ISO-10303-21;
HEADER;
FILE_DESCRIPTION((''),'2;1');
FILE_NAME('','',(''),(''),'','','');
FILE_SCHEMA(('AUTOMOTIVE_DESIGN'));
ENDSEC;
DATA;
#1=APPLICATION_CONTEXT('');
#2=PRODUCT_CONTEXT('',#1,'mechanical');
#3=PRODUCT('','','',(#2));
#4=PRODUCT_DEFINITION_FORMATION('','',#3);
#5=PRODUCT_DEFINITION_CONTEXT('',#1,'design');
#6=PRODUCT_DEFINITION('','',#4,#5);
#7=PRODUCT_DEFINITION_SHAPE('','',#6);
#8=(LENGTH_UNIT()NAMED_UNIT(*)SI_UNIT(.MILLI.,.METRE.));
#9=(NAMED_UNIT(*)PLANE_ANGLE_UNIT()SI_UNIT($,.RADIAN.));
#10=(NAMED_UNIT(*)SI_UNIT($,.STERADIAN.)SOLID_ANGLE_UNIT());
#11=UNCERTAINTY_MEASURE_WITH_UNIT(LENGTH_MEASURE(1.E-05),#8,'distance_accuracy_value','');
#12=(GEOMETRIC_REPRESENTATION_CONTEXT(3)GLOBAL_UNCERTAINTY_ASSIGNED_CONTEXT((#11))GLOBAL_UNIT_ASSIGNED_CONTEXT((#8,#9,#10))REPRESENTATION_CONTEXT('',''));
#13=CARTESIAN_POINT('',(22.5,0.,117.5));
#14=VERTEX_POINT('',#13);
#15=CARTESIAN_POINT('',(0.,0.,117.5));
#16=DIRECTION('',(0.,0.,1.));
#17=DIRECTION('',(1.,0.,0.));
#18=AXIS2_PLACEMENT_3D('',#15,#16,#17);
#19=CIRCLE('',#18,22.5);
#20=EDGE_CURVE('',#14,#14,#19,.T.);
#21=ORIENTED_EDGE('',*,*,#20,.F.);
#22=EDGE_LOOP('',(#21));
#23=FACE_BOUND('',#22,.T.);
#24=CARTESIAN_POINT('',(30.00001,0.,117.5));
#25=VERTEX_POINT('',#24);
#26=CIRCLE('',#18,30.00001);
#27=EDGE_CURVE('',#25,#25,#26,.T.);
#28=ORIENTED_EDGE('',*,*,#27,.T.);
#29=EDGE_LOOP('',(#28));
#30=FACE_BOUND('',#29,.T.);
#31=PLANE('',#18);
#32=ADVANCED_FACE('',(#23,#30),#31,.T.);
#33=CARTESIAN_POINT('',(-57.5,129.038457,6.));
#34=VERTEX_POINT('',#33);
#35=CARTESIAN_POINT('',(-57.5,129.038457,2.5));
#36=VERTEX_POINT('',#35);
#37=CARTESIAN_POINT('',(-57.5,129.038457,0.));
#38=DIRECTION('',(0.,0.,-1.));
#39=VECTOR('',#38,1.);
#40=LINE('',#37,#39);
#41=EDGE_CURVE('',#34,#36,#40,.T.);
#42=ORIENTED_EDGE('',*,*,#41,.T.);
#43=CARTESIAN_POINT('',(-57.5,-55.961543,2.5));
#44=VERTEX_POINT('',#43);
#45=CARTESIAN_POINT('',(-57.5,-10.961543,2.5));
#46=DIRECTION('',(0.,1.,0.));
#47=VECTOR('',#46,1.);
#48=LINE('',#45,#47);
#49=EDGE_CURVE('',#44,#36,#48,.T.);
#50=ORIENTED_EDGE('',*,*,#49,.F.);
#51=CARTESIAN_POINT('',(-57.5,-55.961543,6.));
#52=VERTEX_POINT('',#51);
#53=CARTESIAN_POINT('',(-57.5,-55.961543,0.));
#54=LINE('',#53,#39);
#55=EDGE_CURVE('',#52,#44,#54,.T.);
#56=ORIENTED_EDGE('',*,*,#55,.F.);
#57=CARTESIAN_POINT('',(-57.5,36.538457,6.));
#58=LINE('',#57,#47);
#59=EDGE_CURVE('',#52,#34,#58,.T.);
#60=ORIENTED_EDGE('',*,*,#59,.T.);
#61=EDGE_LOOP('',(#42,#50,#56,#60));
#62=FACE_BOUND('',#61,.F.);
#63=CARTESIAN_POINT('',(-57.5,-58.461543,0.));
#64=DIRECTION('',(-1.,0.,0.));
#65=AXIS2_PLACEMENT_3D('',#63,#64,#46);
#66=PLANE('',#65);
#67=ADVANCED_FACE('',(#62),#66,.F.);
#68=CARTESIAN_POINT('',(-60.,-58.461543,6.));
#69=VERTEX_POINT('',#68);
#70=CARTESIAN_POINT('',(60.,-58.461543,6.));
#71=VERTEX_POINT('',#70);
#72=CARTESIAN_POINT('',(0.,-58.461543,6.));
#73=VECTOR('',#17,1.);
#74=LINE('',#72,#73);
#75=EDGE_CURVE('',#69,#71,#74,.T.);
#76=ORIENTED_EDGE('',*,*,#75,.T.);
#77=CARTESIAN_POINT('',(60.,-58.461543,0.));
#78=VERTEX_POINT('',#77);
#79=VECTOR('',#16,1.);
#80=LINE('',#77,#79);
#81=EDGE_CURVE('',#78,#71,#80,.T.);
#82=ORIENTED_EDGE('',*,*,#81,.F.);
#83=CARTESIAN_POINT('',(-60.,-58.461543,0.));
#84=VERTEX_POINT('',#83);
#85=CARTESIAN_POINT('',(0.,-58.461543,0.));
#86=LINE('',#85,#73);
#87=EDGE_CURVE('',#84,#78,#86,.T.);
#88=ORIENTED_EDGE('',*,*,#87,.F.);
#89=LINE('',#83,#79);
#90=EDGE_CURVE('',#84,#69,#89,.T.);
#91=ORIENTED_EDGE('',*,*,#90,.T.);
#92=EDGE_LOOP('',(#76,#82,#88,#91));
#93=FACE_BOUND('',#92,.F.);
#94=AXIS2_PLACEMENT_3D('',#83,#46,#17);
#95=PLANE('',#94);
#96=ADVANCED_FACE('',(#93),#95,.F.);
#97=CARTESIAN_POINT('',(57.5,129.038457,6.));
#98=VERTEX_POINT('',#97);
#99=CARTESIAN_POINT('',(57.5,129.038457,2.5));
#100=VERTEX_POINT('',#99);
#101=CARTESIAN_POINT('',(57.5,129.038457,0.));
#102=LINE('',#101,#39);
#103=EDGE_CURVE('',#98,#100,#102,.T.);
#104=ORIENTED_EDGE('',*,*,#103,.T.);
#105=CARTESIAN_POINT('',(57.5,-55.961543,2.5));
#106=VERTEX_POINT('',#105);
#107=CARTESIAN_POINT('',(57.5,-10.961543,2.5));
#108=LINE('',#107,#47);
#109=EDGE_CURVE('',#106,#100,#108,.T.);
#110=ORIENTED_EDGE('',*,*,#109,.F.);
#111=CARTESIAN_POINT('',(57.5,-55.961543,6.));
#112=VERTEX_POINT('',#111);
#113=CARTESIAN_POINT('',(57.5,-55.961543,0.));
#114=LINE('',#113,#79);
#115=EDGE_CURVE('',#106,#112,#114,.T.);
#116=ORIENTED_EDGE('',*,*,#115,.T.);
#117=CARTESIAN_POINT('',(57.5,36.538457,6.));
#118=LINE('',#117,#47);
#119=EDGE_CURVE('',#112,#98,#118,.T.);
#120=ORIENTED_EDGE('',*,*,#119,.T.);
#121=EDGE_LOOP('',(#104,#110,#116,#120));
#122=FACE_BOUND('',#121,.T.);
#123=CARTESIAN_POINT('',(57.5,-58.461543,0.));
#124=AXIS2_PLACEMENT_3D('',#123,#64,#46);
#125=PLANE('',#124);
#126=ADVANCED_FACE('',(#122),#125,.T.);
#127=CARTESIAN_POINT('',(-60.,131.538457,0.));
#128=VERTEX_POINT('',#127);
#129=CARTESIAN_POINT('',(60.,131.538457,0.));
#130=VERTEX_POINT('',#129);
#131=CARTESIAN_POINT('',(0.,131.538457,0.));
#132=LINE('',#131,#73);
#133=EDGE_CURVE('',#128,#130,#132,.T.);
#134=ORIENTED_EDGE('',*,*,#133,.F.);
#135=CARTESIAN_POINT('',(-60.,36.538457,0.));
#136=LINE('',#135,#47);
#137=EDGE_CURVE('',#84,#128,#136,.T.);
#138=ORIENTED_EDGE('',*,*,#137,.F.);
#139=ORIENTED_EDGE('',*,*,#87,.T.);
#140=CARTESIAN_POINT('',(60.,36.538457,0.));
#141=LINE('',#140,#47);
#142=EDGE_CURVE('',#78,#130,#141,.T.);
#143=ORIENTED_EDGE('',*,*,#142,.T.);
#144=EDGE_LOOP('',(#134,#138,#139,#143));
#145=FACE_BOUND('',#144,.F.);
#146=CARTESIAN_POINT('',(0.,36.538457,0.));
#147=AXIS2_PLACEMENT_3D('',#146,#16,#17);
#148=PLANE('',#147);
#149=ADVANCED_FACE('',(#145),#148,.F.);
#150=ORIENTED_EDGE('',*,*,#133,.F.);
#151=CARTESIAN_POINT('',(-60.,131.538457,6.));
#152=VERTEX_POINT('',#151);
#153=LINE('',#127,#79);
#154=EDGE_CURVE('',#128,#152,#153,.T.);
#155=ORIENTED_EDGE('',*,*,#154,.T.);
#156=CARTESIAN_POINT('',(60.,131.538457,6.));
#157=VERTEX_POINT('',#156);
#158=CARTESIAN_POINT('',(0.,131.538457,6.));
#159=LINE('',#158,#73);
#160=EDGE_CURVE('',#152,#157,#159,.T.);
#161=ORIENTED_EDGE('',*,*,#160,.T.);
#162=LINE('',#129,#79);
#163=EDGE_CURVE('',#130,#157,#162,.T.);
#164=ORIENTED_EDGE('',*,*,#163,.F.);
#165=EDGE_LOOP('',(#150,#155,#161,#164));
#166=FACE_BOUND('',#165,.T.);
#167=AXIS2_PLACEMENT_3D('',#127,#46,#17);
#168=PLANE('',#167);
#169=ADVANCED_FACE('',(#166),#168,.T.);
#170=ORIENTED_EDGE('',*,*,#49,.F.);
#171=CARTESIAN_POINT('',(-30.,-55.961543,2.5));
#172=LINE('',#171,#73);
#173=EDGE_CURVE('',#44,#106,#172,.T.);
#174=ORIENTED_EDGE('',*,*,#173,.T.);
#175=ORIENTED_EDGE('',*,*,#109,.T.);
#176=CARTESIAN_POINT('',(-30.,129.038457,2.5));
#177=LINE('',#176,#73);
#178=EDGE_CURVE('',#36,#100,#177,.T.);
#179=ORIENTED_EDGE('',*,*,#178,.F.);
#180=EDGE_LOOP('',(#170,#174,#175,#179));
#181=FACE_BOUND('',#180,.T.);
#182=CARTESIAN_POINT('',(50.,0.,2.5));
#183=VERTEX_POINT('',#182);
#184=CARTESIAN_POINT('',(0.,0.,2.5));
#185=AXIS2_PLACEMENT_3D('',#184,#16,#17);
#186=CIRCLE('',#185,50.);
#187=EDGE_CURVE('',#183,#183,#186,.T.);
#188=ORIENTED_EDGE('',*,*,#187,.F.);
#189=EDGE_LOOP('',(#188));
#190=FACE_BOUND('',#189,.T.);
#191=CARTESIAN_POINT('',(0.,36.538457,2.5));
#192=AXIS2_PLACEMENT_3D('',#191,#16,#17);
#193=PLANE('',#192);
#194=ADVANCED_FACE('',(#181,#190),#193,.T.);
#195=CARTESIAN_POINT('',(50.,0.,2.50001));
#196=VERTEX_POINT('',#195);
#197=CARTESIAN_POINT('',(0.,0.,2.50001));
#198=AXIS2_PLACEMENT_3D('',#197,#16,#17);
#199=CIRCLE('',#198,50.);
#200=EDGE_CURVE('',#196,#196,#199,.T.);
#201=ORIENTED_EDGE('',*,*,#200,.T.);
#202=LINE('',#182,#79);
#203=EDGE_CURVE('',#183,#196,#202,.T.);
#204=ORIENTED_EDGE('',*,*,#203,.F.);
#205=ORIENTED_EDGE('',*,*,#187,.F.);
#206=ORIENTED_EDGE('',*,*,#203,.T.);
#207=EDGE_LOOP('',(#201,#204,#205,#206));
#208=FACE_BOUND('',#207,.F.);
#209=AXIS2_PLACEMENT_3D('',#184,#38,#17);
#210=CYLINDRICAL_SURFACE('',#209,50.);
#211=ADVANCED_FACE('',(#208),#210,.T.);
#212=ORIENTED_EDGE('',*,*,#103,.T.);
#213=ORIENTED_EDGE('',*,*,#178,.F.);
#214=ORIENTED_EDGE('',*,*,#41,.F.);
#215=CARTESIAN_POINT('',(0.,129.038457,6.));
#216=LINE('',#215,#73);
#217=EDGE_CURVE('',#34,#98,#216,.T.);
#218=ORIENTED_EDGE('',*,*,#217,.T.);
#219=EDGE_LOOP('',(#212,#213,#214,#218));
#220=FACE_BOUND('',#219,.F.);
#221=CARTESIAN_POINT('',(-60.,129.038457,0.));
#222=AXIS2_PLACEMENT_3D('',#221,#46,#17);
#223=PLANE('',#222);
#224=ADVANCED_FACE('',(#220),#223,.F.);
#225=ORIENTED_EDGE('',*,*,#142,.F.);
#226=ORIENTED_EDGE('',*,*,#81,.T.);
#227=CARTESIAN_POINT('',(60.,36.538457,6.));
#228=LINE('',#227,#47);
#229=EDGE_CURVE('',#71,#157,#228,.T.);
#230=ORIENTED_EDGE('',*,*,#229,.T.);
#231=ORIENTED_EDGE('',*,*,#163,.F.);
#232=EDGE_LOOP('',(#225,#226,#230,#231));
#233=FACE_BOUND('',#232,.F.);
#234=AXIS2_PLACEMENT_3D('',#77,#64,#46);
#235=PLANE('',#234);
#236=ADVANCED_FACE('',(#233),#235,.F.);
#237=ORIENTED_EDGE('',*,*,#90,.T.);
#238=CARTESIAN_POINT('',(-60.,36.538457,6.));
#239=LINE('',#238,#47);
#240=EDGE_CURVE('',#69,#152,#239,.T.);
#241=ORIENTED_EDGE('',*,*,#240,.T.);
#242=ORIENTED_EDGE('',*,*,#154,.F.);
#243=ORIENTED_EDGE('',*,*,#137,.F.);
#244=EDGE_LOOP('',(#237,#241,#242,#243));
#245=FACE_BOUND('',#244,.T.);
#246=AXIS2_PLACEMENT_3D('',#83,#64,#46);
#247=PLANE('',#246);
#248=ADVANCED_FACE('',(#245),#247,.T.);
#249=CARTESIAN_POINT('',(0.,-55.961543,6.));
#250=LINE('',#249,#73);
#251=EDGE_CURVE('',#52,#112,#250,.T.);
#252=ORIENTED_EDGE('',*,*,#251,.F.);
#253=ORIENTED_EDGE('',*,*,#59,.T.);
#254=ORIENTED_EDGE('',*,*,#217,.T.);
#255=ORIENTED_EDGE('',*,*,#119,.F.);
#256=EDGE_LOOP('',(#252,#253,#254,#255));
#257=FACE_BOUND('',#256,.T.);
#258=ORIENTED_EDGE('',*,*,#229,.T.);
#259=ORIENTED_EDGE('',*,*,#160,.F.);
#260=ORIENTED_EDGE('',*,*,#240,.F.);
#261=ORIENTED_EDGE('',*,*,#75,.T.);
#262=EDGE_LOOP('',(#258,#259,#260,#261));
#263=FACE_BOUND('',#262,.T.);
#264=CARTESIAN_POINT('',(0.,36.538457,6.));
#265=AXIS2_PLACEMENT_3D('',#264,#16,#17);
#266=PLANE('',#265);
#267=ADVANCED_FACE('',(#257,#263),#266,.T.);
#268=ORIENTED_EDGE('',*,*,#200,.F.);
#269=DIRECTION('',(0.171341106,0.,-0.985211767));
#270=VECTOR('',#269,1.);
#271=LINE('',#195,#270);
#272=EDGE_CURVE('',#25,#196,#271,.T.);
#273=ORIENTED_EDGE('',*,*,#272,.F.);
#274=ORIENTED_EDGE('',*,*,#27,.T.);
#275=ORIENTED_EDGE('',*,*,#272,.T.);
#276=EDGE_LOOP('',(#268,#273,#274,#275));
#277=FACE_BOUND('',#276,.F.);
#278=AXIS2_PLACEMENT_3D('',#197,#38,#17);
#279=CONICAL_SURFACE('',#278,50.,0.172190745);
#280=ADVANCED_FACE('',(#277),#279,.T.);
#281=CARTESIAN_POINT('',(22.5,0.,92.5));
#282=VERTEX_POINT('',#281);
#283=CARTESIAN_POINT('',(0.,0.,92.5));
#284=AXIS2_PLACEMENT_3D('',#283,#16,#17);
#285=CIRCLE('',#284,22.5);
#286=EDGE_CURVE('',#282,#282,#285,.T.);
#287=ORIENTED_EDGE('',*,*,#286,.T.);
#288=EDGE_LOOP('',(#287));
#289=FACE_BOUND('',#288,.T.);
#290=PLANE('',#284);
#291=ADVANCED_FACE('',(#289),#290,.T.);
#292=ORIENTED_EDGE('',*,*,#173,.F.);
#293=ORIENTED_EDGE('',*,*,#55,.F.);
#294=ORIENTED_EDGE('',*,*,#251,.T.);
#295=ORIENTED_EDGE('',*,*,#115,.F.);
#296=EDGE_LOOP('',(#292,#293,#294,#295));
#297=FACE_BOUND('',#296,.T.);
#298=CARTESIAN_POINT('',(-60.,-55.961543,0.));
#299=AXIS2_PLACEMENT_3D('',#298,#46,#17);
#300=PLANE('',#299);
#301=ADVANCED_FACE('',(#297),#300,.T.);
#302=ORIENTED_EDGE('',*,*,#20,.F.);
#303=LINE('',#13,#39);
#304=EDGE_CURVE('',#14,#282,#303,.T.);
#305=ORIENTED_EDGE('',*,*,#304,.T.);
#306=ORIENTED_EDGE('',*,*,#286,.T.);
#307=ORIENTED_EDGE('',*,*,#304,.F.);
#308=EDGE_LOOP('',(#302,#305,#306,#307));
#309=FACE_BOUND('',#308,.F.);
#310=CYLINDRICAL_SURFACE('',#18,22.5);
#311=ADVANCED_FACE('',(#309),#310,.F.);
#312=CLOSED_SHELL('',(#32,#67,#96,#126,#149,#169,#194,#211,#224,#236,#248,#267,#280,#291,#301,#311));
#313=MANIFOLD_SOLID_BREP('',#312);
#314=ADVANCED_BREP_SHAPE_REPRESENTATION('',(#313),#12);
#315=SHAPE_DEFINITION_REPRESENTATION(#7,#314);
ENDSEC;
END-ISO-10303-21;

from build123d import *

# Parameters (mm, degrees)
F0_W     = 120
F0_H     = 190
F1_DEPTH = 6
F2_T     = -2.5
F3_R     = 50
F4_DEPTH = 115
F5_SIZE2 = 114.99999
F5_SIZE  = 19.99999
F6_R     = 22.5
F7_DEPTH = 25


# Not quite as in the source:
# - a fillet or chamfer is up to 0.001 mm smaller than in the source, because OpenCascade refuses the exact size


with BuildPart() as f1:
    # F0 (on Top) → F1 (new body)
    with BuildSketch(Plane.XY):
        with Locations((0, 36.5384568274)):
            Rectangle(F0_W, F0_H)
    extrude(amount=F1_DEPTH)

    # F2
    f2_openings = [f1.faces().sort_by_distance(p)[0] for p in [
        (0, 36.538457, 6),
    ]]
    offset(amount=F2_T, openings=f2_openings)

    # F3 (on face) → F4 (join)
    with BuildSketch(Plane.XY.offset(2.5)):
        Circle(F3_R)
    extrude(amount=F4_DEPTH)

    # F5 (size 20 and 115 in the source; OpenCascade refuses exactly that, so slightly less here)
    f5_edges = [f1.edges().sort_by_distance(p)[0] for p in [
        (-50, 0, 117.5),
    ]]
    f5_side = f1.faces().sort_by_distance((0, 0, 117.5))[0]
    chamfer(f5_edges, length=F5_SIZE, length2=F5_SIZE2, reference=f5_side)

    # F6 (on face) → F7 (cut)
    with BuildSketch(Plane.XY.offset(117.5)):
        Circle(F6_R)
    extrude(amount=-F7_DEPTH, mode=Mode.SUBTRACT)


solid = f1.part
